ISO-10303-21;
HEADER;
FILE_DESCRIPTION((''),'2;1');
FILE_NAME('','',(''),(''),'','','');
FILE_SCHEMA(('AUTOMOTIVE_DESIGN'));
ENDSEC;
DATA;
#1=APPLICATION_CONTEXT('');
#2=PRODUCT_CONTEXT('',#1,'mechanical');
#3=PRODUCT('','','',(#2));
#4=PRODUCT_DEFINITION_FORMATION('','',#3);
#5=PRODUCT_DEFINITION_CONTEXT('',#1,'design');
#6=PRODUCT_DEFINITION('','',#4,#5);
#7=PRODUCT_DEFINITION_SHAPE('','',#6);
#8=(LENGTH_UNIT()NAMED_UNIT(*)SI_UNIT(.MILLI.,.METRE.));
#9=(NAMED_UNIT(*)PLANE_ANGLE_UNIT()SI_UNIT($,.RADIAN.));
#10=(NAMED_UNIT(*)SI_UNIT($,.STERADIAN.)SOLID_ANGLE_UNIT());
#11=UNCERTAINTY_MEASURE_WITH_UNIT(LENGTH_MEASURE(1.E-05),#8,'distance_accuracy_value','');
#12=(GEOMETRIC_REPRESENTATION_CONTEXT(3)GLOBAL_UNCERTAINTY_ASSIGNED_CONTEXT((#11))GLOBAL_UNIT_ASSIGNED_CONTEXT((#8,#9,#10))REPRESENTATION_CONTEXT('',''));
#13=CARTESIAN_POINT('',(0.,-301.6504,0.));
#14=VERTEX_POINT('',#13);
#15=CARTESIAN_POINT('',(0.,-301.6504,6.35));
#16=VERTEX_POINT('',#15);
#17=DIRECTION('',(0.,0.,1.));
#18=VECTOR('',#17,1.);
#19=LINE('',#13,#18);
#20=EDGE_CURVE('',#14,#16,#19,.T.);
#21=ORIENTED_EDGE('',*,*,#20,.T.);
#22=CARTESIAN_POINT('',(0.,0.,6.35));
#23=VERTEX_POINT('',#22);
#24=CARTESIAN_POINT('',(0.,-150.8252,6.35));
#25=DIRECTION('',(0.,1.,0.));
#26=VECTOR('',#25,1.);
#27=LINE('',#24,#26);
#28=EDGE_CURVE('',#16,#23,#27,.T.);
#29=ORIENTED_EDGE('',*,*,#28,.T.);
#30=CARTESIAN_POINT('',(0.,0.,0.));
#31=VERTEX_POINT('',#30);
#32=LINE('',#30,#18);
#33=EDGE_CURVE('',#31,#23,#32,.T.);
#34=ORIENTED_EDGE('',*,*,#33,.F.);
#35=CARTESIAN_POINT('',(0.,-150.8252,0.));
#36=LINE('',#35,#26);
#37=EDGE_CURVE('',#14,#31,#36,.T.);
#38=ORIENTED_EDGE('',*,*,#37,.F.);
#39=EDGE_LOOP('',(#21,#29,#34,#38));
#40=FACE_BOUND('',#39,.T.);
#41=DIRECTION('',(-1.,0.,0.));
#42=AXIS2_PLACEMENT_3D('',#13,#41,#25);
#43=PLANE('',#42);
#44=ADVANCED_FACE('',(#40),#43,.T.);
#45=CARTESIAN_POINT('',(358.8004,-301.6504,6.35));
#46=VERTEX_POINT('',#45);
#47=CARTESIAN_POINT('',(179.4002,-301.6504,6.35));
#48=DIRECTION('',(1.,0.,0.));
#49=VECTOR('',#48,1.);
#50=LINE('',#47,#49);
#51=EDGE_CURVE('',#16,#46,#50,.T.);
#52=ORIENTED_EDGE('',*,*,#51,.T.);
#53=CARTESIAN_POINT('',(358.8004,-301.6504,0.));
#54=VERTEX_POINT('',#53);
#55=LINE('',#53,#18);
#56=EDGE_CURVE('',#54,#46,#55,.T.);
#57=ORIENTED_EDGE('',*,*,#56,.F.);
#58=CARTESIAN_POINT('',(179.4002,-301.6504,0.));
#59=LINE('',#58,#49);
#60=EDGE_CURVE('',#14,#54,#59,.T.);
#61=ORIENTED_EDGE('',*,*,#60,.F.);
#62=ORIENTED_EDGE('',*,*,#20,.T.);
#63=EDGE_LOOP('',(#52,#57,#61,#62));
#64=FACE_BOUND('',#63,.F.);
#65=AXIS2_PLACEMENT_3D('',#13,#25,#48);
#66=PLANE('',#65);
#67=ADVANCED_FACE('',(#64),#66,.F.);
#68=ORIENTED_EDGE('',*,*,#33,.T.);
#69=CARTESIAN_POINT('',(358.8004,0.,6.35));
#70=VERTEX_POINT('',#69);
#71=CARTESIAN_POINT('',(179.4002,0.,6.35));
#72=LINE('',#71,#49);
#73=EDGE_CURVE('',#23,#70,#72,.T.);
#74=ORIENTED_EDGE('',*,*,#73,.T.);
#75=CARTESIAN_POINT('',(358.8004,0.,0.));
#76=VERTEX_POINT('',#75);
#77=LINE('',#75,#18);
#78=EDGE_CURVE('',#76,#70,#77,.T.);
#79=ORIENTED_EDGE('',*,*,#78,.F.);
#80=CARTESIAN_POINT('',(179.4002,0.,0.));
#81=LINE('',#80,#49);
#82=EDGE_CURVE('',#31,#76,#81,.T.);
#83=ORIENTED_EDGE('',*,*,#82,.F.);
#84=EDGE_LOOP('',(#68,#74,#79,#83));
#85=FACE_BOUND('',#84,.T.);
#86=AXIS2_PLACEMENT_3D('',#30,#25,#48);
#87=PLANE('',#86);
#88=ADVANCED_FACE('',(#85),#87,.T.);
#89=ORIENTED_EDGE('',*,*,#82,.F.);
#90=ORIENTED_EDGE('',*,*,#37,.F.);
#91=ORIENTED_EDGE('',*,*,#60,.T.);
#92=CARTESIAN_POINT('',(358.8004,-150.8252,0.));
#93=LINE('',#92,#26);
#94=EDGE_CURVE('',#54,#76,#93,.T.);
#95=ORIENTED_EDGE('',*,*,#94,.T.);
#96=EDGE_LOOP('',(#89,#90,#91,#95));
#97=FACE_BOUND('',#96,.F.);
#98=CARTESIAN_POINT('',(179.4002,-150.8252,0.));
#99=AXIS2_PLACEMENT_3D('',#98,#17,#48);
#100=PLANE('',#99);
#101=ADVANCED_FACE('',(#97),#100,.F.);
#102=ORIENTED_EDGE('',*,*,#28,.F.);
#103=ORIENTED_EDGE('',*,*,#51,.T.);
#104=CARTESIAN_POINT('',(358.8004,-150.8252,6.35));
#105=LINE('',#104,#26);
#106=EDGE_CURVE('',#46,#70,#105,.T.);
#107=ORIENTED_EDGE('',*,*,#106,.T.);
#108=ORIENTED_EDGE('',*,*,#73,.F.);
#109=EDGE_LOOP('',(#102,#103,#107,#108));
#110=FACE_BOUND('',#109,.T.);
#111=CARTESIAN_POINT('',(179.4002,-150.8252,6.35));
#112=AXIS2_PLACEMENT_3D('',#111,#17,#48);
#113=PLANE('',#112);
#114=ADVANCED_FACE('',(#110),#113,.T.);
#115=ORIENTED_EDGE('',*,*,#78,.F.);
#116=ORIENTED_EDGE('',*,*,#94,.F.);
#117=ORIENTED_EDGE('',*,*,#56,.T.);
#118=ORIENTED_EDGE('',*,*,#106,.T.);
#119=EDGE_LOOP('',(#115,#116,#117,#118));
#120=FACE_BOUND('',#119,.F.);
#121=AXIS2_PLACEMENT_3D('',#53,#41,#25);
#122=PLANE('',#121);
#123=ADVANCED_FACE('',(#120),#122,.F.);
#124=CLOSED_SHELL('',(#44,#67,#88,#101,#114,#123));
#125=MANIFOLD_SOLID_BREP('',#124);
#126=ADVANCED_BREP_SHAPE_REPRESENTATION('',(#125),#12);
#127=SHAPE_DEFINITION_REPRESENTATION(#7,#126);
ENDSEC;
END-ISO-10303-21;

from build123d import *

# Parameters (mm, degrees)
F1_W     = 358.8004
F1_H     = 301.6504
F2_DEPTH = 6.35


# Not quite as in the source:
# - a variable given as a bare number and used for a length is read in inches; the dataset says mm whatever the document's units were


with BuildPart() as f2:
    # F1 (on Top) → F2 (new body)
    with BuildSketch(Plane.XY):
        with Locations((179.4002, -150.8252)):
            Rectangle(F1_W, F1_H)
    extrude(amount=F2_DEPTH)


solid = f2.part
